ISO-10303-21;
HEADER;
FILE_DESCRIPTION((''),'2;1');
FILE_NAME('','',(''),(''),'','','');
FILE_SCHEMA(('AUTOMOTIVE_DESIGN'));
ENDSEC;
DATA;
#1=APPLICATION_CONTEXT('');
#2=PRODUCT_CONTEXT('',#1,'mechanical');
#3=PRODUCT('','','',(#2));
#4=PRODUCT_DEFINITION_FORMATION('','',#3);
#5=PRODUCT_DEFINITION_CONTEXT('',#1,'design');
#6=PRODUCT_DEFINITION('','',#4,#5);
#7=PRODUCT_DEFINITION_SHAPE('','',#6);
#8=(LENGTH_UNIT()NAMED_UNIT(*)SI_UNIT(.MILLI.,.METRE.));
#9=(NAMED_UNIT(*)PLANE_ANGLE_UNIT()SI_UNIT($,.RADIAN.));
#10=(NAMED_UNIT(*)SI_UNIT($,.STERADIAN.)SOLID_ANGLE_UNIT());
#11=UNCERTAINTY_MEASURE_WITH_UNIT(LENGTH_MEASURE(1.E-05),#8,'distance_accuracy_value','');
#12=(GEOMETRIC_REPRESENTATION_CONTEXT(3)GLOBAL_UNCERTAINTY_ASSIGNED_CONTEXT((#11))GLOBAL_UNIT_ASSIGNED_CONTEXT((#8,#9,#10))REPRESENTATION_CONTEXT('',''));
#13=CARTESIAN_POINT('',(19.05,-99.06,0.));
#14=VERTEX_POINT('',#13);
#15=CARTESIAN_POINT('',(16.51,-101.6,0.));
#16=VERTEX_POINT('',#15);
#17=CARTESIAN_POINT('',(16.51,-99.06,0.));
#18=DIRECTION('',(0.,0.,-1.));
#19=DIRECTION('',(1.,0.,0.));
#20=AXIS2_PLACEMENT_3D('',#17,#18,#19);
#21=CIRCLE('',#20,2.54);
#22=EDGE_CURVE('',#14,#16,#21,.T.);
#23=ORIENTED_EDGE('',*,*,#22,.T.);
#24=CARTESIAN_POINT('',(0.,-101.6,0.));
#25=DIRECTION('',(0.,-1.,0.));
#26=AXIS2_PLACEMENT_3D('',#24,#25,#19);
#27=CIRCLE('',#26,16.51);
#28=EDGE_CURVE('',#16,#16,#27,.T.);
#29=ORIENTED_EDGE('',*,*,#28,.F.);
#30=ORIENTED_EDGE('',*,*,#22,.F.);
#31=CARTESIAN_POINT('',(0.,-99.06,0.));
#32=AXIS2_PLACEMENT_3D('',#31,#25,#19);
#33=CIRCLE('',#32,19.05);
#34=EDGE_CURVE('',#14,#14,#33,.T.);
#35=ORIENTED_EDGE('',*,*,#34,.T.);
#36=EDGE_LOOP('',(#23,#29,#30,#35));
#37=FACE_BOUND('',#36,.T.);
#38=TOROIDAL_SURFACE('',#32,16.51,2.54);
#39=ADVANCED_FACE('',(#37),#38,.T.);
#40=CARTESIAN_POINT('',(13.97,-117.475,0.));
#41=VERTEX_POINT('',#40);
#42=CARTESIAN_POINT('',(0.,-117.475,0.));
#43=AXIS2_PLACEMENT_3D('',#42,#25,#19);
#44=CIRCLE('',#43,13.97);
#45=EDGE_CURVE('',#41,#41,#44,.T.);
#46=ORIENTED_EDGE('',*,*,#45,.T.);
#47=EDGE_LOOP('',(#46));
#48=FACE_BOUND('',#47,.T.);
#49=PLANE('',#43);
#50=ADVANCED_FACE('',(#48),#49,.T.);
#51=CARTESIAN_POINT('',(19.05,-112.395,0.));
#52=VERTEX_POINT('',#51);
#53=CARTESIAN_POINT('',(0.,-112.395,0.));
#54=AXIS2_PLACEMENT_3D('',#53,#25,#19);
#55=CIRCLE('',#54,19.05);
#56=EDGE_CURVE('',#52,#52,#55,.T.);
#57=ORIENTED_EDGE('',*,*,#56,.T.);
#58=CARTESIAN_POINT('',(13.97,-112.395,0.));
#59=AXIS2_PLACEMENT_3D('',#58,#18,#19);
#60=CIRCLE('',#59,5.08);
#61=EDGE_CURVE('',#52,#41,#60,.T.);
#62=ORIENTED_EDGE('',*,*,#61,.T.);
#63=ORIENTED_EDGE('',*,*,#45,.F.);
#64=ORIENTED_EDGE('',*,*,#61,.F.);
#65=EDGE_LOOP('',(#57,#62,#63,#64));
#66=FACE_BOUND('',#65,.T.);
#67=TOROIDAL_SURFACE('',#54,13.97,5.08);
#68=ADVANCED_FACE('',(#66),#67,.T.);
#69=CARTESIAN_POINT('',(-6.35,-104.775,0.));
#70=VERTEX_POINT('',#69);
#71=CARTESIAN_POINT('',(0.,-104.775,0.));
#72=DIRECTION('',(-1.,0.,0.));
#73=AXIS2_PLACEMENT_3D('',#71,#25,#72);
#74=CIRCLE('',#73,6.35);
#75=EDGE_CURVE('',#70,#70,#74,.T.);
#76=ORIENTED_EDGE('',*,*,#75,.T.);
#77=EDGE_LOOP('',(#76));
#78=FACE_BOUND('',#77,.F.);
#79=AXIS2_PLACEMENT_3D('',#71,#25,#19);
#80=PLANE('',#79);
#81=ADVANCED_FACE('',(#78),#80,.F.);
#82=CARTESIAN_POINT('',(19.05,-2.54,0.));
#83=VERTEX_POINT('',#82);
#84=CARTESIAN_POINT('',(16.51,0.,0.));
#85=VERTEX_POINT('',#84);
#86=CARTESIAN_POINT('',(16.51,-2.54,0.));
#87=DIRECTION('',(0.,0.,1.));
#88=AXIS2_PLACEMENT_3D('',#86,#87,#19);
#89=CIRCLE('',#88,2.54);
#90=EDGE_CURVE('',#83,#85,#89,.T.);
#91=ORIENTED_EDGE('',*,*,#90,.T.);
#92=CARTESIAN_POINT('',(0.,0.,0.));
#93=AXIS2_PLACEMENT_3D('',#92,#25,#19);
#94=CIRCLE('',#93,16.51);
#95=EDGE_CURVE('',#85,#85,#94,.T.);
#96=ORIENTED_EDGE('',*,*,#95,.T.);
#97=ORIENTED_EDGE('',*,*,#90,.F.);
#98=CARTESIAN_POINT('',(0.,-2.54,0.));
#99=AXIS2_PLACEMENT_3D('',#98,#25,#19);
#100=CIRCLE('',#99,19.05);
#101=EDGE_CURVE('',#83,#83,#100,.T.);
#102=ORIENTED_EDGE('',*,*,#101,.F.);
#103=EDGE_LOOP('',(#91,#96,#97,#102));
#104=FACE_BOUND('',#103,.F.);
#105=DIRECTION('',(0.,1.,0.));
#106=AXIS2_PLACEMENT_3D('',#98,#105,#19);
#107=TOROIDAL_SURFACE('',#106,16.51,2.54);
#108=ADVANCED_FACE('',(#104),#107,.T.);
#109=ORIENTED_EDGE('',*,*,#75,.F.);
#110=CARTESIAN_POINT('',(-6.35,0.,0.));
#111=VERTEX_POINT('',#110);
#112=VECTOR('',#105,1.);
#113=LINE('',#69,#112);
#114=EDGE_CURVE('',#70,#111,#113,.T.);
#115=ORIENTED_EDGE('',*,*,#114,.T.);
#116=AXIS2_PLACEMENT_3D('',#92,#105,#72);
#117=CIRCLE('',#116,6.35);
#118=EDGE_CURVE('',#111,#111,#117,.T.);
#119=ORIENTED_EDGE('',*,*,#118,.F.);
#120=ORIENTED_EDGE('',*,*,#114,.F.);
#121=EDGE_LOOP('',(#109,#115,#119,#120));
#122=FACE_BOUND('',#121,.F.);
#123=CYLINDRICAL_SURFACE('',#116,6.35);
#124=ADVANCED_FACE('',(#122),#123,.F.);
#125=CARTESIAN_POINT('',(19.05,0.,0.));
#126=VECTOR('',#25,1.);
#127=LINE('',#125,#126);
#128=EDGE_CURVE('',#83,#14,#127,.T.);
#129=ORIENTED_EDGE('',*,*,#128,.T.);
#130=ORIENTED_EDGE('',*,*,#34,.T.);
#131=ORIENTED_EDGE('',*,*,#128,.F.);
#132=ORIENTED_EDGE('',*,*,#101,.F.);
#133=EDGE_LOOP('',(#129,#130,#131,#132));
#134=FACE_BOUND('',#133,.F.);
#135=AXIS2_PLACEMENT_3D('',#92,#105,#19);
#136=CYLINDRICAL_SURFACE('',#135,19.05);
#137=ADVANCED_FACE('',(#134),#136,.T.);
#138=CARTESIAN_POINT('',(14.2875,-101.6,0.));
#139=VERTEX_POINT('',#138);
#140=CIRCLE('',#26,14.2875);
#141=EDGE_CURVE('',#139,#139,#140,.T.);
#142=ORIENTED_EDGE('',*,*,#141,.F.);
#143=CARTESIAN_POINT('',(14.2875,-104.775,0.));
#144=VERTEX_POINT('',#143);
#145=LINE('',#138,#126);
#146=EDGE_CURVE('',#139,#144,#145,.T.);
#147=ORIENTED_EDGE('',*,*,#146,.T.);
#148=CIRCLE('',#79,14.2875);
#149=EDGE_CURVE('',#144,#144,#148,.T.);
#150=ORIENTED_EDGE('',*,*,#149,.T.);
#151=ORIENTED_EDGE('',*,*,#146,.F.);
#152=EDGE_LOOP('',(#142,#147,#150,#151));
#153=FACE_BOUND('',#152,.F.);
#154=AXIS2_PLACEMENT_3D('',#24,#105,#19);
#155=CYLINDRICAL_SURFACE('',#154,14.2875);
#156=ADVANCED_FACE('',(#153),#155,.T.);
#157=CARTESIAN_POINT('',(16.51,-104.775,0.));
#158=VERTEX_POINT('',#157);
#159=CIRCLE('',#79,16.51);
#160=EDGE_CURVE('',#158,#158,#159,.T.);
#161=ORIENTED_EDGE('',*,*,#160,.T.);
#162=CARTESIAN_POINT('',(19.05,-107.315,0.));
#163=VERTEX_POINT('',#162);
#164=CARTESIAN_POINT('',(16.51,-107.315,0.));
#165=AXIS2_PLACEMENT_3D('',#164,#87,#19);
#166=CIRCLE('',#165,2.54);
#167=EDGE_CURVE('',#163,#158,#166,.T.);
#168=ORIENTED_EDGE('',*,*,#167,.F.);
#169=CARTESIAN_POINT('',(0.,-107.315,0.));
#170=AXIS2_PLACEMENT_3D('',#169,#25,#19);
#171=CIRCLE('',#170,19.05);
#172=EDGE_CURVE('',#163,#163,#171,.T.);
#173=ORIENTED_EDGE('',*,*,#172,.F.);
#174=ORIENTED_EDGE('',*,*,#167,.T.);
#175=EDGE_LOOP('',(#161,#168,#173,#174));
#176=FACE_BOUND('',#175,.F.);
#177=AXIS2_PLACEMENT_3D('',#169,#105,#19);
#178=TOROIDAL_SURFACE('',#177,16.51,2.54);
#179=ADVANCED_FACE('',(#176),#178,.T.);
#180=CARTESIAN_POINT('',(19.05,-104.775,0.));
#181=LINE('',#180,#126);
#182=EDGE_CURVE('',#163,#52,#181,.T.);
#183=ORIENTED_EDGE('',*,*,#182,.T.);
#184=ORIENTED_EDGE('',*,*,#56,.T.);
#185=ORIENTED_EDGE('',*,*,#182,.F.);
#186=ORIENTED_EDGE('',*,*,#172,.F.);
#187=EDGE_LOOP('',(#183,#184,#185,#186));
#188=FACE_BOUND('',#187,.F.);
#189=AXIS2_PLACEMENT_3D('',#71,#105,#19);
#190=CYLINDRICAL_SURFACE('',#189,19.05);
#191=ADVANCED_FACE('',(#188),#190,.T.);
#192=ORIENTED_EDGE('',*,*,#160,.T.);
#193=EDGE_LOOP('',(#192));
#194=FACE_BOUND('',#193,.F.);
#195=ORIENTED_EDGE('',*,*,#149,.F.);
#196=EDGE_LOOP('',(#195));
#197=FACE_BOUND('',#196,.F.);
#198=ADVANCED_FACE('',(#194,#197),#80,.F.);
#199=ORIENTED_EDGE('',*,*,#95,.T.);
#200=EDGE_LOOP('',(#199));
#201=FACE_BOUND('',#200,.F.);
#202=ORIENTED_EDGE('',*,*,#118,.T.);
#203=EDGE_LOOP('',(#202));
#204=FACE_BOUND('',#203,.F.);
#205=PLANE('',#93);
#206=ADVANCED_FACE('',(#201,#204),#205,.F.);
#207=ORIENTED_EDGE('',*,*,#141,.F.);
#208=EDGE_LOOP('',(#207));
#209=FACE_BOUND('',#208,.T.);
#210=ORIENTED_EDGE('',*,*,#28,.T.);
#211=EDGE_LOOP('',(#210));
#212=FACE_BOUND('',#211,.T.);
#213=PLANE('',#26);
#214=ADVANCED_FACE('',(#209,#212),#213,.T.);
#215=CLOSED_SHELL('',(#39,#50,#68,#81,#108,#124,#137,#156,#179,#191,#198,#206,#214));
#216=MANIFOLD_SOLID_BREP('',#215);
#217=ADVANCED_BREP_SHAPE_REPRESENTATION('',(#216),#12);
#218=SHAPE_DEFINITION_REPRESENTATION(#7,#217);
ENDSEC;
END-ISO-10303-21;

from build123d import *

# Parameters (mm, degrees)
F0_R      = 19.05
F1_DEPTH  = 101.6
F2_R      = 2.54
F5_R      = 14.2875
F5_R_2    = 6.35
F6_DEPTH  = 3.175
F7_R      = 19.05
F7_R_2    = 14.2875
F8_DEPTH  = 25.4
F10_R     = 19.05
F11_DEPTH = 12.7
F12_R     = 2.54
F13_R     = 5.08
F3_R      = 6.35
F14_DEPTH = 104.775


# Not quite as in the source:
# - a feature names something its author has since deleted; it is built from what else it names


with BuildPart() as f1:
    # F0 (on Front) → F1 (new body)
    with BuildSketch(Plane.XZ):
        Circle(F0_R)
    extrude(amount=F1_DEPTH)

    # F2
    f2_edges = [f1.edges().sort_by_distance(p)[0] for p in [
        (-19.05, -101.6, 0),
        (-19.05, 0, 0),
    ]]
    fillet(f2_edges, radius=F2_R)

    # F5 (on face) → F6 (join)
    with BuildSketch(Plane.XZ.offset(101.6)):
        Circle(F5_R)
        Circle(F5_R_2, mode=Mode.SUBTRACT)
    extrude(amount=F6_DEPTH)

    # F10 (on face) → F11 (join)
    with BuildSketch(Plane.XZ.offset(104.775)):
        Circle(F10_R)
    extrude(amount=F11_DEPTH)

    # F12
    f12_edges = [f1.edges().sort_by_distance(p)[0] for p in [
        (-19.05, -104.775, 0),
    ]]
    fillet(f12_edges, radius=F12_R)

    # F13
    f13_edges = [f1.edges().sort_by_distance(p)[0] for p in [
        (-19.05, -117.475, 0),
    ]]
    fillet(f13_edges, radius=F13_R)

    # F3 (on face) → F14 (cut, through all)
    with BuildSketch(Plane(origin=(0, 0, 0), x_dir=(-1, 0, 0), z_dir=(0, 1, 0))):
        Circle(F3_R)
    extrude(amount=-F14_DEPTH, mode=Mode.SUBTRACT)


with BuildPart() as f8:
    # F7 (on face) → F8 (new body)
    with BuildSketch(Plane.XZ.offset(104.775)):
        Circle(F7_R)
        Circle(F7_R_2, mode=Mode.SUBTRACT)
    extrude(amount=F8_DEPTH)


solid = f1.part
